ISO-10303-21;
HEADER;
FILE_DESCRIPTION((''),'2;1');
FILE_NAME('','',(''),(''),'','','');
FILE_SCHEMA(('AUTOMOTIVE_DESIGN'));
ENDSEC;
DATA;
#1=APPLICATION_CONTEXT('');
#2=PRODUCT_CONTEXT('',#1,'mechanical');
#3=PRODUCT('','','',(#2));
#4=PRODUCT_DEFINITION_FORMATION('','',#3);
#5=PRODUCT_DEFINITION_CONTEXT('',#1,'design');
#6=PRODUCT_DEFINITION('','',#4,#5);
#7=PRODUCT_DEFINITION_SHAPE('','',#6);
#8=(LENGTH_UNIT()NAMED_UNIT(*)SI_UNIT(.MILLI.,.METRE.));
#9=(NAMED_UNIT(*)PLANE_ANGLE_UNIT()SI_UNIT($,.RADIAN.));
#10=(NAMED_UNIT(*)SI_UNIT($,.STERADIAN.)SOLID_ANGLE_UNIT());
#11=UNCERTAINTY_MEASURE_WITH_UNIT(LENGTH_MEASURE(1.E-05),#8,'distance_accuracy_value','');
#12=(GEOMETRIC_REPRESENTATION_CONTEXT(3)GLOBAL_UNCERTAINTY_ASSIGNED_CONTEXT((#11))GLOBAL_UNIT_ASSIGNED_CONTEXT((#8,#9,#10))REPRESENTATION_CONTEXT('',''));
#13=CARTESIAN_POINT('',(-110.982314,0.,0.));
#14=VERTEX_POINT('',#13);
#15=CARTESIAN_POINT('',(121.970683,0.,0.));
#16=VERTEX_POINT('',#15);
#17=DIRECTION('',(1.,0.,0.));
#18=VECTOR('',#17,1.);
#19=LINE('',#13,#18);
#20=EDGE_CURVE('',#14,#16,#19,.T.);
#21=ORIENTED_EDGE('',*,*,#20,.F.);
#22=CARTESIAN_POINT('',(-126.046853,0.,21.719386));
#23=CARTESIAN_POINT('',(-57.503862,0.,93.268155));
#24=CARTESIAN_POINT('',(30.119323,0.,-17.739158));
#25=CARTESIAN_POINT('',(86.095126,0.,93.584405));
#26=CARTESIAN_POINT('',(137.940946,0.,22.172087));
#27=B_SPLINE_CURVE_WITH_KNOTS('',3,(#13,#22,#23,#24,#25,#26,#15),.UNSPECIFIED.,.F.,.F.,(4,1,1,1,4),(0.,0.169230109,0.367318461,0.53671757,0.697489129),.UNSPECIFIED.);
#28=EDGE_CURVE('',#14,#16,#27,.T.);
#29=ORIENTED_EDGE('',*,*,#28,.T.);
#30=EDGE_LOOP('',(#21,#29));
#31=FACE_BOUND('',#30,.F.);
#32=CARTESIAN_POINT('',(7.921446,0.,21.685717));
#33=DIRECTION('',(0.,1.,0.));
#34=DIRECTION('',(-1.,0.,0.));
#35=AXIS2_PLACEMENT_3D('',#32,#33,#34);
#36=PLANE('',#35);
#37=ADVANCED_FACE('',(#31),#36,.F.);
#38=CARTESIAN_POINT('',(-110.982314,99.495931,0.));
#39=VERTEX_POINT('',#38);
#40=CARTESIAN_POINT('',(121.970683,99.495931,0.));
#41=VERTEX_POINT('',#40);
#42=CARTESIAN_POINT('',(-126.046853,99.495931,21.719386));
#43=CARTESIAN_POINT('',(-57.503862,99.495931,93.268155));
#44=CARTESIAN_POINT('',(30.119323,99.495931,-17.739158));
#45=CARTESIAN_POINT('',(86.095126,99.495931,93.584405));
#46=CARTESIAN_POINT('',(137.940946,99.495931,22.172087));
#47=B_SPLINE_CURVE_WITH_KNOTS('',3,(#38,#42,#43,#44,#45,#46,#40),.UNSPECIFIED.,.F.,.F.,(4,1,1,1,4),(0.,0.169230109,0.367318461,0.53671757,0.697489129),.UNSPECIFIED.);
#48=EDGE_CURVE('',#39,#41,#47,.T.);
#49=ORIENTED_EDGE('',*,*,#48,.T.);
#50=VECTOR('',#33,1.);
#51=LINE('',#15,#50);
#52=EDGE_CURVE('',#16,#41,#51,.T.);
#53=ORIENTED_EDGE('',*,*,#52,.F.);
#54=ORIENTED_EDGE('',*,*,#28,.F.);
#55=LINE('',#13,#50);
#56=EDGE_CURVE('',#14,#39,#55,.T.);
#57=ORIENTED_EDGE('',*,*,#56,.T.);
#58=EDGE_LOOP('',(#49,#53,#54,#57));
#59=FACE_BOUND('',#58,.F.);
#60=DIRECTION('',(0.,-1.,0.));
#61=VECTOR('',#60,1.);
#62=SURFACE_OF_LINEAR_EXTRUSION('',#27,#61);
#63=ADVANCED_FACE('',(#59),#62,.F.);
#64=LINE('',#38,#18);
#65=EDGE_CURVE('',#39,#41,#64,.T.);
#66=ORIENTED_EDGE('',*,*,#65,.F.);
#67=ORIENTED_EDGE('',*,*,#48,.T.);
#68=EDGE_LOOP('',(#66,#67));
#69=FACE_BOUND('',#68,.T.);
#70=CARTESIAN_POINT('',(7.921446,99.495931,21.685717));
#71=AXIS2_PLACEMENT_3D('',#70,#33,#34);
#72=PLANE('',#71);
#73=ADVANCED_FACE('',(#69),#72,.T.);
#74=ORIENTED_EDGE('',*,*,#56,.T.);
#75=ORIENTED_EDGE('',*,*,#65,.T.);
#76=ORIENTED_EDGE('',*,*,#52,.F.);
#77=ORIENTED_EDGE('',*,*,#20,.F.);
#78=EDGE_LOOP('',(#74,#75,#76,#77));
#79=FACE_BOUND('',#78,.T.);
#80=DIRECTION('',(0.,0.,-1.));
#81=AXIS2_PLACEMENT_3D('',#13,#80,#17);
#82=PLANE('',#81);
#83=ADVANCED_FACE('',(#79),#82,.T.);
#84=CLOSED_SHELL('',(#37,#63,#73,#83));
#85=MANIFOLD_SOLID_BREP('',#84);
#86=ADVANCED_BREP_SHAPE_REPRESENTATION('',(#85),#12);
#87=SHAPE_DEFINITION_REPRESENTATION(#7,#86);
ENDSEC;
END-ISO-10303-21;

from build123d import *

# Parameters (mm, degrees)
F1_DEPTH = 99.4959305972


with BuildPart() as f1:
    # F0 (on Front) → F1 (new body)
    with BuildSketch(Plane.XZ):
        with BuildLine():
            add(Edge.make_bspline(
                [(-110.9823137522, 0), (-126.0468532321, 21.719385534), (-57.5038619045, 93.268154866), (30.1193231256, -17.739157856), (86.0951259075, 93.5844051862), (137.940946041, 22.1720869346), (121.9706833363, 0)],
                knots=[0, 0, 0, 0, 0.1692301092, 0.3673184606, 0.5367175703, 0.6974891295, 0.6974891295, 0.6974891295, 0.6974891295], degree=3))
            Line((-110.9823137522, 0), (121.9706833363, 0))
        make_face()
    extrude(amount=-F1_DEPTH)


solid = f1.part
